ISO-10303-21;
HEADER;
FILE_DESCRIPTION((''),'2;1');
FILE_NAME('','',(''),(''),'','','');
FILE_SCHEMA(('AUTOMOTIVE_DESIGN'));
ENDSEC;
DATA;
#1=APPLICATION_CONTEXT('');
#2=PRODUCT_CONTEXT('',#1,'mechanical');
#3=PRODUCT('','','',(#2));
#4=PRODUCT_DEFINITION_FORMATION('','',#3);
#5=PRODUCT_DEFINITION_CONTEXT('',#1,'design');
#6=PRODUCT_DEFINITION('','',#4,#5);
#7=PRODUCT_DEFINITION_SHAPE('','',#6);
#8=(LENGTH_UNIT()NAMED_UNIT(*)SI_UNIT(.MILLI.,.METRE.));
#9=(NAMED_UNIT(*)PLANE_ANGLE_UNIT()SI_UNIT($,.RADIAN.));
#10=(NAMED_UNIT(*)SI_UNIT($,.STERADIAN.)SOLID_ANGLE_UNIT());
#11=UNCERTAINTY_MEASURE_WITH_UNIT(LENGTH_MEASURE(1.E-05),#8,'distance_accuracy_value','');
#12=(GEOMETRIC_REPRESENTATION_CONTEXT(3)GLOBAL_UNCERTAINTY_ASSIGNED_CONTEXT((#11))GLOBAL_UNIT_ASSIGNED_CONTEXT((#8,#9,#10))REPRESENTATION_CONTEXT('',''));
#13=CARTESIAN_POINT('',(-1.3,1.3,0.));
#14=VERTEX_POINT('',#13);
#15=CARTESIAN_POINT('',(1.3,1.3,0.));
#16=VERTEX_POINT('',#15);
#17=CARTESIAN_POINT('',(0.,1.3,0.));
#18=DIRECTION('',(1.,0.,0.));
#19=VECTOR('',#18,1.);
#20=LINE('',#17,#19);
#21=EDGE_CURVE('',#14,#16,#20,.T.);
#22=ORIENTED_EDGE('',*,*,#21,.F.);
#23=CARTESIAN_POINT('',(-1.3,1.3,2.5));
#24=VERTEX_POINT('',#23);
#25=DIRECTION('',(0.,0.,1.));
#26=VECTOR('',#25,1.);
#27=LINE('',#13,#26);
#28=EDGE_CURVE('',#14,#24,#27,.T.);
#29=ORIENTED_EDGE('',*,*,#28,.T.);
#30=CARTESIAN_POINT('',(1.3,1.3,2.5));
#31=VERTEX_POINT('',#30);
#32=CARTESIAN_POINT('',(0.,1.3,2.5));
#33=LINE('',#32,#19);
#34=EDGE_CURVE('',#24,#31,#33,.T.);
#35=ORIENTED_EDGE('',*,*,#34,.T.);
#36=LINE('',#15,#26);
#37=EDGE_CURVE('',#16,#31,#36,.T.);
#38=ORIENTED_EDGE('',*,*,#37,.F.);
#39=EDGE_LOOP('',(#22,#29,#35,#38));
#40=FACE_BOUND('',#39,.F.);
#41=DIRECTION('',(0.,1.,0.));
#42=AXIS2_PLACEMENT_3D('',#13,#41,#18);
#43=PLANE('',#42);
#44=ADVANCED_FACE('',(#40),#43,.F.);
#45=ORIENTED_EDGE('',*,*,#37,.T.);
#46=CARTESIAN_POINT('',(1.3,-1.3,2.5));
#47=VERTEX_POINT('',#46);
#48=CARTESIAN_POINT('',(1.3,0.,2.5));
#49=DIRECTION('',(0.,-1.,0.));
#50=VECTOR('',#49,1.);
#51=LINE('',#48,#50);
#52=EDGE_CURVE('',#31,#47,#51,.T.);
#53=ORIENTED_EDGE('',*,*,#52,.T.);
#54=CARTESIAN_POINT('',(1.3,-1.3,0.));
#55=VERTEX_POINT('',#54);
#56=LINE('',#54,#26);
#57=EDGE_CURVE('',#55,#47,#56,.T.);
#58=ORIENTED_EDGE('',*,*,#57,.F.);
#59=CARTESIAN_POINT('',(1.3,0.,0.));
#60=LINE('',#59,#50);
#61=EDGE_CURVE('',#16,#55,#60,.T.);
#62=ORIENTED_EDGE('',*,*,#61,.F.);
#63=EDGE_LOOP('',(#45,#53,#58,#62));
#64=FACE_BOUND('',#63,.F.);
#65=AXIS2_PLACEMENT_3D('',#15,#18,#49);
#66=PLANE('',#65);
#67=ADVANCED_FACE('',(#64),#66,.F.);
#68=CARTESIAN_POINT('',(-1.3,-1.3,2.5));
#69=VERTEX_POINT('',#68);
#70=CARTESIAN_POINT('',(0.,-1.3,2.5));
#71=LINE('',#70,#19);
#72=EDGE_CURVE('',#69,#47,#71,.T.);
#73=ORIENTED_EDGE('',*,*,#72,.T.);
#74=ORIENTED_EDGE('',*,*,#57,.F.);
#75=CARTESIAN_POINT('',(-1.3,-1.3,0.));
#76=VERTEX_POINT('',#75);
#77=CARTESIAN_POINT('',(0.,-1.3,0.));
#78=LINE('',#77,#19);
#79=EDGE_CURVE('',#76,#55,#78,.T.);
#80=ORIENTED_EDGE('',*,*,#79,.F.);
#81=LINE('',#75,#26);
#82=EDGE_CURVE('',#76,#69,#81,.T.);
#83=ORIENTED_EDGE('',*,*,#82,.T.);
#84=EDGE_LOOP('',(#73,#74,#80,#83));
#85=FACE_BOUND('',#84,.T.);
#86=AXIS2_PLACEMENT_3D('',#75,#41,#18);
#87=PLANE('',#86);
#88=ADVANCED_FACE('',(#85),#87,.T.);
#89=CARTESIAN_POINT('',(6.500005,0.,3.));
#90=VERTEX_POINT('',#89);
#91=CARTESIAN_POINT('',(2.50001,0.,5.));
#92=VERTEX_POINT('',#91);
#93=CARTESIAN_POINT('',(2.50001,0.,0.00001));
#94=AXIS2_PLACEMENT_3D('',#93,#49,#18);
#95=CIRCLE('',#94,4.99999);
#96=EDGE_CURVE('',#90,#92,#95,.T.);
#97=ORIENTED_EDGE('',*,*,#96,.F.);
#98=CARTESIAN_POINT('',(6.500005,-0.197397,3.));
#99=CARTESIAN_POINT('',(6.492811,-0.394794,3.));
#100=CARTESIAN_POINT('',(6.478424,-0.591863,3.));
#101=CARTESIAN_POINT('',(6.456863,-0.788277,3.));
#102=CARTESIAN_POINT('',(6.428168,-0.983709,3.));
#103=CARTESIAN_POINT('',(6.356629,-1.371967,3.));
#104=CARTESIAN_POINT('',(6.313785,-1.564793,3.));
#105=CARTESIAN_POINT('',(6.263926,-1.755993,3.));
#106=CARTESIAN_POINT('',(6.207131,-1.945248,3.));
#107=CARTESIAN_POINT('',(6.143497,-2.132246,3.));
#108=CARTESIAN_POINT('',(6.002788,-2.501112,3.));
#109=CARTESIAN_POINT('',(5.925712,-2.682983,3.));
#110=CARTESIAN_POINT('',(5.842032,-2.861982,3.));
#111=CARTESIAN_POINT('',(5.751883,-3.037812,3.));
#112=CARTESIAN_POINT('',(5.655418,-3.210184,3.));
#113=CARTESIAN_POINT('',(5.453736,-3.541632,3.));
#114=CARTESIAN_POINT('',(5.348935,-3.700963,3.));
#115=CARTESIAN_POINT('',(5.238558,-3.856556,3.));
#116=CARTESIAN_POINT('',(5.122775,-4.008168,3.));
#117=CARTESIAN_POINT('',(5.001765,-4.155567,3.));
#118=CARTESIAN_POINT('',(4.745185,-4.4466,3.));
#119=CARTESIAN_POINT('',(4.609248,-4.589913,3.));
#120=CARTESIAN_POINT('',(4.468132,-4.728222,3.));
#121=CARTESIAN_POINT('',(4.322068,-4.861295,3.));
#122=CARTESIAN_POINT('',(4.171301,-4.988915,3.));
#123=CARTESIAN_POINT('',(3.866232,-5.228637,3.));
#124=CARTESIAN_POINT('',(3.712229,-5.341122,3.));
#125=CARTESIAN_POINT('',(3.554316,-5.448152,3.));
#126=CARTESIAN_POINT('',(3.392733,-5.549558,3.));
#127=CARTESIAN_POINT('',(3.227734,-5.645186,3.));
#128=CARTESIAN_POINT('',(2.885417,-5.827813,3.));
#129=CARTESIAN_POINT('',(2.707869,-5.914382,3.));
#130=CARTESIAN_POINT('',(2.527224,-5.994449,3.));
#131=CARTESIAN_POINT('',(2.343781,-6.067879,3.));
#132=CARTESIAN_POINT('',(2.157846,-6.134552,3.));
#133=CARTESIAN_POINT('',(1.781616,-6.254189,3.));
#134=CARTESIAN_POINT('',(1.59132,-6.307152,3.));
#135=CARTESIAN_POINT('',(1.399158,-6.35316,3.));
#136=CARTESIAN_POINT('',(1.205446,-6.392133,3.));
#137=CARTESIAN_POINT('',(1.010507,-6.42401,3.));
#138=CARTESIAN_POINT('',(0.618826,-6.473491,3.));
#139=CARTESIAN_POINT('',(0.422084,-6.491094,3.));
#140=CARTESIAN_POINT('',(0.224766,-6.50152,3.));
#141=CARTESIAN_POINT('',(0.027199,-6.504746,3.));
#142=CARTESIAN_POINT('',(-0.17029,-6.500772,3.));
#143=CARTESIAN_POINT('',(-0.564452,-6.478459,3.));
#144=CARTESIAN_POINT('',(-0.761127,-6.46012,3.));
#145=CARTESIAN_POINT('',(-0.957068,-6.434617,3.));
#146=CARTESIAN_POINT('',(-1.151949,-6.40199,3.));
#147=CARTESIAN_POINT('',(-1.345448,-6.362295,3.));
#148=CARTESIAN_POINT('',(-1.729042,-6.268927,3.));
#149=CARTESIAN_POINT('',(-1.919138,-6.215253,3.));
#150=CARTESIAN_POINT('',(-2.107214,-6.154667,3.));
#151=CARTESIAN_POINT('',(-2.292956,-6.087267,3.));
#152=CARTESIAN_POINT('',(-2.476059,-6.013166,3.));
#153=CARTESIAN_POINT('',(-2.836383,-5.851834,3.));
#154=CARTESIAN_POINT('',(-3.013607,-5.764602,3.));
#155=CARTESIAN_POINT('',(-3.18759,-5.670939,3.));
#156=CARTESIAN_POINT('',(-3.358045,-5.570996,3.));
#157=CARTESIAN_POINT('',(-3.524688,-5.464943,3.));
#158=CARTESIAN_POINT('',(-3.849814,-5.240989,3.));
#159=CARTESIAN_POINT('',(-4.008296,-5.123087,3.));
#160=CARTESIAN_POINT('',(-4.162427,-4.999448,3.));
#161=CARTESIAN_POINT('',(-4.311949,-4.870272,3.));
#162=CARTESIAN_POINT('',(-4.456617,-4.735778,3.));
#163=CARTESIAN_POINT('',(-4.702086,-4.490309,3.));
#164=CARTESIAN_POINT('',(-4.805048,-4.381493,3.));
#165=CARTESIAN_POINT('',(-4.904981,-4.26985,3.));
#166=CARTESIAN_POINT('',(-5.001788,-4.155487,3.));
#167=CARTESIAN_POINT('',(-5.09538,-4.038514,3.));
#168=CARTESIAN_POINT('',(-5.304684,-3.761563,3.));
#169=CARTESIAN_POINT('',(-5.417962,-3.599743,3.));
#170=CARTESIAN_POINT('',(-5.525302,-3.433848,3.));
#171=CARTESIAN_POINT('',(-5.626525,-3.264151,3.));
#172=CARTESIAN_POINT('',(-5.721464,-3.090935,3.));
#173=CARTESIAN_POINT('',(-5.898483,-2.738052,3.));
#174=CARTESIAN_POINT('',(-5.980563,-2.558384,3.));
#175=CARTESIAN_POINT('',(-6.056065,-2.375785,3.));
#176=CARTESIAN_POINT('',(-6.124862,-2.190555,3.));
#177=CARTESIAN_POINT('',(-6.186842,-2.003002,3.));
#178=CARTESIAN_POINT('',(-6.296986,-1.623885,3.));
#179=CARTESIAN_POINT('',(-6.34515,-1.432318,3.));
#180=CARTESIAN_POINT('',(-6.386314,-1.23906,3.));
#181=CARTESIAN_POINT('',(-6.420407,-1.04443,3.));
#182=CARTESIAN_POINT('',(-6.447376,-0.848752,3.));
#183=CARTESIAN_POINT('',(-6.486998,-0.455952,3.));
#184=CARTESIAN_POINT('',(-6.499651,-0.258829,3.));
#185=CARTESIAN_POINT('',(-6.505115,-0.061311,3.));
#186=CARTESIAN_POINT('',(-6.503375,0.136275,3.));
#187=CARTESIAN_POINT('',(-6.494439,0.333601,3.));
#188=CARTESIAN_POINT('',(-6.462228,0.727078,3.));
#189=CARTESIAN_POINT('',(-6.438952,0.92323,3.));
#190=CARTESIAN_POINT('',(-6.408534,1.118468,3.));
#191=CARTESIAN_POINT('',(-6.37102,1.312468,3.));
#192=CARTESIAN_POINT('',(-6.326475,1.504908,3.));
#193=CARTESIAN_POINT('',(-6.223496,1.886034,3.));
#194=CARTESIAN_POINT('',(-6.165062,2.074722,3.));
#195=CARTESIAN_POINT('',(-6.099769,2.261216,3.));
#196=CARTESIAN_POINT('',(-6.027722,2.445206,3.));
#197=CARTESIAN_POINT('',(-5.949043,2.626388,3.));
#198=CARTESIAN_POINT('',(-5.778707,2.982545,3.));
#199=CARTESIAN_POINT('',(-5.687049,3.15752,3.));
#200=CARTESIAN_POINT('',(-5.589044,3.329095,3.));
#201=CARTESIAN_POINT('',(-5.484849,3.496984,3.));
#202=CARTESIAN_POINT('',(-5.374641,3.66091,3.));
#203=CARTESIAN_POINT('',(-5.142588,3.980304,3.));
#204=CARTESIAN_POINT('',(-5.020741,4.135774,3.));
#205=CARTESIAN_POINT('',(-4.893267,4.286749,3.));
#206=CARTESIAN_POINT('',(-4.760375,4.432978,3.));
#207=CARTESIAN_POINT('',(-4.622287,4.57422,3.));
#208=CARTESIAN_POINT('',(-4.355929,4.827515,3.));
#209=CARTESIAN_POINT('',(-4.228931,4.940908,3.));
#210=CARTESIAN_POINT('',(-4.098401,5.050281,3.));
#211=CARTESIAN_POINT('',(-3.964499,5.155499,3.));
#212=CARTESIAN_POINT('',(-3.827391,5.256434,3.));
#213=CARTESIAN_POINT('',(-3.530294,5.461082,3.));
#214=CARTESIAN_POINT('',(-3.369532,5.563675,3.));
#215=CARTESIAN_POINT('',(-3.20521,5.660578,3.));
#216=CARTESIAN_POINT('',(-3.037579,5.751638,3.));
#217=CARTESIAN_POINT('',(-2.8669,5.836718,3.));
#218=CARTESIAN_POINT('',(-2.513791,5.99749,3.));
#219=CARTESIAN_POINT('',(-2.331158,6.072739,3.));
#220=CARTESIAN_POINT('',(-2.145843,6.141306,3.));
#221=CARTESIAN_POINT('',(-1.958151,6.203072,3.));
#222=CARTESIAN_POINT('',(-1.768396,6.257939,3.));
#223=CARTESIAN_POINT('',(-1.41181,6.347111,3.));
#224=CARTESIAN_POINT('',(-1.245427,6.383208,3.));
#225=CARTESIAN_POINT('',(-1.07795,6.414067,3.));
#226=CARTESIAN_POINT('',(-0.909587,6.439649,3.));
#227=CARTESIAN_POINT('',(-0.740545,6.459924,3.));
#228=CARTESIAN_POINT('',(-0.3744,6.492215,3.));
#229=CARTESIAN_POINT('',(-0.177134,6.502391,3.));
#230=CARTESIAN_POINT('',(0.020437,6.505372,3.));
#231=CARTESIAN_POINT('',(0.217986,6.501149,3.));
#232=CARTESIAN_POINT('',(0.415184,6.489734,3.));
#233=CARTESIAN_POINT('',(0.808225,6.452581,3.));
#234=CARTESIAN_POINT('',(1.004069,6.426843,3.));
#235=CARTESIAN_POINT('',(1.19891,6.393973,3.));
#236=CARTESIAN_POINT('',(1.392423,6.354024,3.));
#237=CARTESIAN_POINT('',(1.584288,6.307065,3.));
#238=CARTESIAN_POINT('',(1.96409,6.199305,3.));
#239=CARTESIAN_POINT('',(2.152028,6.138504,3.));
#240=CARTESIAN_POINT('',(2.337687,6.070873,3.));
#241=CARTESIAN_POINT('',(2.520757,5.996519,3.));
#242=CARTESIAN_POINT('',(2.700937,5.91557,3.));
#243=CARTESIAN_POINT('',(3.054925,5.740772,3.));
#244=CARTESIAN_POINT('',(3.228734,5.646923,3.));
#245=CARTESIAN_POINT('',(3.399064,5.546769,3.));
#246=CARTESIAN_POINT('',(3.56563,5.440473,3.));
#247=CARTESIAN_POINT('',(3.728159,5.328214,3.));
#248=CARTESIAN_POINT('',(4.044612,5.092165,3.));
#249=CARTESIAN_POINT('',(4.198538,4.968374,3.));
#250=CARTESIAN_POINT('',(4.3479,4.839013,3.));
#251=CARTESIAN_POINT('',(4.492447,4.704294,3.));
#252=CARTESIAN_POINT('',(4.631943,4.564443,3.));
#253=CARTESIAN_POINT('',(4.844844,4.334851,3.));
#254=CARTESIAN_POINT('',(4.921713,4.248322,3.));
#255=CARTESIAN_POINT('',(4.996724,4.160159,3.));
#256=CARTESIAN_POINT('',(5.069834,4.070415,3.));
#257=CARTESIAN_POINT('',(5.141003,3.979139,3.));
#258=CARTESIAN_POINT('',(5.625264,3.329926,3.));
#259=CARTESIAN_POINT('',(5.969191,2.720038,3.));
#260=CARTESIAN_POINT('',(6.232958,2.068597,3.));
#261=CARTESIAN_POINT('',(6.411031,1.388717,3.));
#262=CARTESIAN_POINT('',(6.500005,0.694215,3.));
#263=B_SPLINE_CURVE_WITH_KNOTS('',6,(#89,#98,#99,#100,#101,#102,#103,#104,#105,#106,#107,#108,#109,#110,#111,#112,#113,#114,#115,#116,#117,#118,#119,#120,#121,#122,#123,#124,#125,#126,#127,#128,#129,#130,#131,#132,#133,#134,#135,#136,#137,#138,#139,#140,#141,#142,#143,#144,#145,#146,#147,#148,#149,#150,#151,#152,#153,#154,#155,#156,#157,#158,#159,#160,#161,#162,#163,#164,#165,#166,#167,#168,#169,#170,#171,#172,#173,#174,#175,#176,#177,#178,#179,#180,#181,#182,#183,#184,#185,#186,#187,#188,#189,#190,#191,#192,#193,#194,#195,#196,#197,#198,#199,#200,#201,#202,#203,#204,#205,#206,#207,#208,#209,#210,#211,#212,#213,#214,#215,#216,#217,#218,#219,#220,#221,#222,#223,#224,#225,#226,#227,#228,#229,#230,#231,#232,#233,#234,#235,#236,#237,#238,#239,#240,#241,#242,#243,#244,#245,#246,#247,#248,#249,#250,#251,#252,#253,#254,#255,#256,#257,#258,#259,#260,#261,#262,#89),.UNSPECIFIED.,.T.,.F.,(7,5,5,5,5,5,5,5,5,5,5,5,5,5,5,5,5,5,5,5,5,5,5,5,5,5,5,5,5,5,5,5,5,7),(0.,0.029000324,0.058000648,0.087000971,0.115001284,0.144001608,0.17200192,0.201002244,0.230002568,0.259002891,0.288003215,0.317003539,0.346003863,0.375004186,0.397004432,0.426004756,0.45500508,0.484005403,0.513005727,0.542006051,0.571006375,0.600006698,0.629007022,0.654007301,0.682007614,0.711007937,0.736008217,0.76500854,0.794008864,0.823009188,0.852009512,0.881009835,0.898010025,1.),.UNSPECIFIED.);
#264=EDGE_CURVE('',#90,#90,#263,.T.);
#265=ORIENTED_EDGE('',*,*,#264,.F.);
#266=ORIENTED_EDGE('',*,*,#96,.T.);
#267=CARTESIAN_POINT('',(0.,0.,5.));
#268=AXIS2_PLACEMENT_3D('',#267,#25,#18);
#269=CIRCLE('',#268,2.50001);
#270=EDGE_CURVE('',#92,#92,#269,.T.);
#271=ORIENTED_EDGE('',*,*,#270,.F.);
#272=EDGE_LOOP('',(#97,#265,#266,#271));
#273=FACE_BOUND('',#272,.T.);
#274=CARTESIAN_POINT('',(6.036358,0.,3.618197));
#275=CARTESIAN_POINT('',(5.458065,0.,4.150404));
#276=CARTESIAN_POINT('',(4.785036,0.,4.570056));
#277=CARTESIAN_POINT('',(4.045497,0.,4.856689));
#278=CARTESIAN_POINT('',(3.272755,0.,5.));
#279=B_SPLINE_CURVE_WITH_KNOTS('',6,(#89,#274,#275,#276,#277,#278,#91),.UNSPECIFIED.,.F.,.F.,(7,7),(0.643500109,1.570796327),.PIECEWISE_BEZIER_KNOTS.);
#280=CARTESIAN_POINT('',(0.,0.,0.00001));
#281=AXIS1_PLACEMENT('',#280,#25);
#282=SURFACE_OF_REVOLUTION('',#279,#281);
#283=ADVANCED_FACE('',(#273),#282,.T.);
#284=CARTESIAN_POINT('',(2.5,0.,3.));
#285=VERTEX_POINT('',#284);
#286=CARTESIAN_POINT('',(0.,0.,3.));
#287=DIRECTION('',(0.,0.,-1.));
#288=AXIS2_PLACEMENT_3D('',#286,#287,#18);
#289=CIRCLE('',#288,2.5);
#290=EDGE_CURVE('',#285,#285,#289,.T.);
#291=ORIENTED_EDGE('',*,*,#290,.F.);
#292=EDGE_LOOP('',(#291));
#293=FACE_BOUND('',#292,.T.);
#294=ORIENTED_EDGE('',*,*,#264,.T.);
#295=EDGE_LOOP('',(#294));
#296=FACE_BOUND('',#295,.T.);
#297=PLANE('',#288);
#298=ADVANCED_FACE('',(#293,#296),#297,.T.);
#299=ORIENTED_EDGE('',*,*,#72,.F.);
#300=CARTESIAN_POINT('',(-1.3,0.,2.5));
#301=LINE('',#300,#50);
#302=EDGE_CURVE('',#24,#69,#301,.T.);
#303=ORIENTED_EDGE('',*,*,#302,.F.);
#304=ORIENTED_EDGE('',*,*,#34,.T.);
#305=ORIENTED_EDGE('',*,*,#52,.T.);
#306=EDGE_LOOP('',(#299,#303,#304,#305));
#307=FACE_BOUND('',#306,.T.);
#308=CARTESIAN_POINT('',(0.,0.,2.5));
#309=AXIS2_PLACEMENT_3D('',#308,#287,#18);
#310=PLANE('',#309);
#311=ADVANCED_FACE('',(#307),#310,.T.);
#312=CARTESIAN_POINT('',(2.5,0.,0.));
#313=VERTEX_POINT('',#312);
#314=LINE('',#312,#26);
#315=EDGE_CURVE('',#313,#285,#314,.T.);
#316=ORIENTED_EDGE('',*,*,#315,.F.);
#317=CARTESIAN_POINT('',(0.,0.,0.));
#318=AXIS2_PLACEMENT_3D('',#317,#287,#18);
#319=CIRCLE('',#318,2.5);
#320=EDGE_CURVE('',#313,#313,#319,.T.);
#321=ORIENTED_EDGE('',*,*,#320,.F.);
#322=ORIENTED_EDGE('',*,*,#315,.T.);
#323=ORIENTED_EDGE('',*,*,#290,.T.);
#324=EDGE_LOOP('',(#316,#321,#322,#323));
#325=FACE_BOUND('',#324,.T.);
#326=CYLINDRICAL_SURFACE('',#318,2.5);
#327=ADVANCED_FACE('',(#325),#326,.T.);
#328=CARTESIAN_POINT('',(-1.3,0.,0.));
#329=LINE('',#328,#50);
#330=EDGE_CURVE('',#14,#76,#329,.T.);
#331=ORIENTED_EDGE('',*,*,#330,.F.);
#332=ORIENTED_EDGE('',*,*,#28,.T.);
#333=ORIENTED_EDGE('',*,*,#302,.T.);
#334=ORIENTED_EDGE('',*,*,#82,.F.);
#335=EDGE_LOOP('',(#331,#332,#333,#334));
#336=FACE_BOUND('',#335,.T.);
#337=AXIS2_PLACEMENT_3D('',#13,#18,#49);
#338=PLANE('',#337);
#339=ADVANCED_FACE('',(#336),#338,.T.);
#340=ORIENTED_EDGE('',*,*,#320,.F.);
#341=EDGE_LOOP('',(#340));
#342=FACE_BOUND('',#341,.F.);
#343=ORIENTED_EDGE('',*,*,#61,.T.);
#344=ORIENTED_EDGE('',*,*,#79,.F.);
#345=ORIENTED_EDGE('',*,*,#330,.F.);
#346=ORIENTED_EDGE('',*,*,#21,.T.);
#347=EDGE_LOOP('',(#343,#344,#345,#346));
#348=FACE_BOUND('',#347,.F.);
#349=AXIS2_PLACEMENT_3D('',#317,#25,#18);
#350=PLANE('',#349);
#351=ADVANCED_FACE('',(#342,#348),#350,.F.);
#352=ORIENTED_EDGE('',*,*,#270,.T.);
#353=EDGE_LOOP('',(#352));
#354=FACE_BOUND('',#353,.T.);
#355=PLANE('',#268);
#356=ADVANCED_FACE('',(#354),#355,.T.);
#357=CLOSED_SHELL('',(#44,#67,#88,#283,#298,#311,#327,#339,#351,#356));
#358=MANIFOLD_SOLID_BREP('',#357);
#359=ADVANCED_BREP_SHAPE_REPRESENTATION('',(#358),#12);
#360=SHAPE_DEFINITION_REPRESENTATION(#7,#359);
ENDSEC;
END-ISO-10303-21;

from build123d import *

# Parameters (mm, degrees)
F0_R     = 7.5
F1_DEPTH = 5
F2_R     = 4.99999
F3_W     = 2.6
F3_H     = 2.6
F4_DEPTH = 2.5
F5_R     = 7.5
F5_R_2   = 2.5
F6_DEPTH = 3


# Not quite as in the source:
# - a fillet or chamfer is up to 0.001 mm smaller than in the source, because OpenCascade refuses the exact size


with BuildPart() as f1:
    # F0 (on Top) → F1 (new body)
    with BuildSketch(Plane.XY):
        Circle(F0_R)
    extrude(amount=F1_DEPTH)

    # F2 (radius 5 in the source; OpenCascade refuses exactly that, so slightly less here)
    f2_edges = [f1.edges().sort_by_distance(p)[0] for p in [
        (-7.5, 0, 5),
    ]]
    fillet(f2_edges, radius=F2_R)

    # F3 (on face) → F4 (cut)
    with BuildSketch(Plane(origin=(0, 0, 0), x_dir=(1, 0, 0), z_dir=(0, 0, -1))):
        Rectangle(F3_W, F3_H)
    extrude(amount=-F4_DEPTH, mode=Mode.SUBTRACT)

    # F5 (on face) → F6 (cut)
    with BuildSketch(Plane(origin=(0, 0, 0), x_dir=(1, 0, 0), z_dir=(0, 0, -1))):
        Circle(F5_R)
        Circle(F5_R_2, mode=Mode.SUBTRACT)
    extrude(amount=-F6_DEPTH, mode=Mode.SUBTRACT)


solid = f1.part
